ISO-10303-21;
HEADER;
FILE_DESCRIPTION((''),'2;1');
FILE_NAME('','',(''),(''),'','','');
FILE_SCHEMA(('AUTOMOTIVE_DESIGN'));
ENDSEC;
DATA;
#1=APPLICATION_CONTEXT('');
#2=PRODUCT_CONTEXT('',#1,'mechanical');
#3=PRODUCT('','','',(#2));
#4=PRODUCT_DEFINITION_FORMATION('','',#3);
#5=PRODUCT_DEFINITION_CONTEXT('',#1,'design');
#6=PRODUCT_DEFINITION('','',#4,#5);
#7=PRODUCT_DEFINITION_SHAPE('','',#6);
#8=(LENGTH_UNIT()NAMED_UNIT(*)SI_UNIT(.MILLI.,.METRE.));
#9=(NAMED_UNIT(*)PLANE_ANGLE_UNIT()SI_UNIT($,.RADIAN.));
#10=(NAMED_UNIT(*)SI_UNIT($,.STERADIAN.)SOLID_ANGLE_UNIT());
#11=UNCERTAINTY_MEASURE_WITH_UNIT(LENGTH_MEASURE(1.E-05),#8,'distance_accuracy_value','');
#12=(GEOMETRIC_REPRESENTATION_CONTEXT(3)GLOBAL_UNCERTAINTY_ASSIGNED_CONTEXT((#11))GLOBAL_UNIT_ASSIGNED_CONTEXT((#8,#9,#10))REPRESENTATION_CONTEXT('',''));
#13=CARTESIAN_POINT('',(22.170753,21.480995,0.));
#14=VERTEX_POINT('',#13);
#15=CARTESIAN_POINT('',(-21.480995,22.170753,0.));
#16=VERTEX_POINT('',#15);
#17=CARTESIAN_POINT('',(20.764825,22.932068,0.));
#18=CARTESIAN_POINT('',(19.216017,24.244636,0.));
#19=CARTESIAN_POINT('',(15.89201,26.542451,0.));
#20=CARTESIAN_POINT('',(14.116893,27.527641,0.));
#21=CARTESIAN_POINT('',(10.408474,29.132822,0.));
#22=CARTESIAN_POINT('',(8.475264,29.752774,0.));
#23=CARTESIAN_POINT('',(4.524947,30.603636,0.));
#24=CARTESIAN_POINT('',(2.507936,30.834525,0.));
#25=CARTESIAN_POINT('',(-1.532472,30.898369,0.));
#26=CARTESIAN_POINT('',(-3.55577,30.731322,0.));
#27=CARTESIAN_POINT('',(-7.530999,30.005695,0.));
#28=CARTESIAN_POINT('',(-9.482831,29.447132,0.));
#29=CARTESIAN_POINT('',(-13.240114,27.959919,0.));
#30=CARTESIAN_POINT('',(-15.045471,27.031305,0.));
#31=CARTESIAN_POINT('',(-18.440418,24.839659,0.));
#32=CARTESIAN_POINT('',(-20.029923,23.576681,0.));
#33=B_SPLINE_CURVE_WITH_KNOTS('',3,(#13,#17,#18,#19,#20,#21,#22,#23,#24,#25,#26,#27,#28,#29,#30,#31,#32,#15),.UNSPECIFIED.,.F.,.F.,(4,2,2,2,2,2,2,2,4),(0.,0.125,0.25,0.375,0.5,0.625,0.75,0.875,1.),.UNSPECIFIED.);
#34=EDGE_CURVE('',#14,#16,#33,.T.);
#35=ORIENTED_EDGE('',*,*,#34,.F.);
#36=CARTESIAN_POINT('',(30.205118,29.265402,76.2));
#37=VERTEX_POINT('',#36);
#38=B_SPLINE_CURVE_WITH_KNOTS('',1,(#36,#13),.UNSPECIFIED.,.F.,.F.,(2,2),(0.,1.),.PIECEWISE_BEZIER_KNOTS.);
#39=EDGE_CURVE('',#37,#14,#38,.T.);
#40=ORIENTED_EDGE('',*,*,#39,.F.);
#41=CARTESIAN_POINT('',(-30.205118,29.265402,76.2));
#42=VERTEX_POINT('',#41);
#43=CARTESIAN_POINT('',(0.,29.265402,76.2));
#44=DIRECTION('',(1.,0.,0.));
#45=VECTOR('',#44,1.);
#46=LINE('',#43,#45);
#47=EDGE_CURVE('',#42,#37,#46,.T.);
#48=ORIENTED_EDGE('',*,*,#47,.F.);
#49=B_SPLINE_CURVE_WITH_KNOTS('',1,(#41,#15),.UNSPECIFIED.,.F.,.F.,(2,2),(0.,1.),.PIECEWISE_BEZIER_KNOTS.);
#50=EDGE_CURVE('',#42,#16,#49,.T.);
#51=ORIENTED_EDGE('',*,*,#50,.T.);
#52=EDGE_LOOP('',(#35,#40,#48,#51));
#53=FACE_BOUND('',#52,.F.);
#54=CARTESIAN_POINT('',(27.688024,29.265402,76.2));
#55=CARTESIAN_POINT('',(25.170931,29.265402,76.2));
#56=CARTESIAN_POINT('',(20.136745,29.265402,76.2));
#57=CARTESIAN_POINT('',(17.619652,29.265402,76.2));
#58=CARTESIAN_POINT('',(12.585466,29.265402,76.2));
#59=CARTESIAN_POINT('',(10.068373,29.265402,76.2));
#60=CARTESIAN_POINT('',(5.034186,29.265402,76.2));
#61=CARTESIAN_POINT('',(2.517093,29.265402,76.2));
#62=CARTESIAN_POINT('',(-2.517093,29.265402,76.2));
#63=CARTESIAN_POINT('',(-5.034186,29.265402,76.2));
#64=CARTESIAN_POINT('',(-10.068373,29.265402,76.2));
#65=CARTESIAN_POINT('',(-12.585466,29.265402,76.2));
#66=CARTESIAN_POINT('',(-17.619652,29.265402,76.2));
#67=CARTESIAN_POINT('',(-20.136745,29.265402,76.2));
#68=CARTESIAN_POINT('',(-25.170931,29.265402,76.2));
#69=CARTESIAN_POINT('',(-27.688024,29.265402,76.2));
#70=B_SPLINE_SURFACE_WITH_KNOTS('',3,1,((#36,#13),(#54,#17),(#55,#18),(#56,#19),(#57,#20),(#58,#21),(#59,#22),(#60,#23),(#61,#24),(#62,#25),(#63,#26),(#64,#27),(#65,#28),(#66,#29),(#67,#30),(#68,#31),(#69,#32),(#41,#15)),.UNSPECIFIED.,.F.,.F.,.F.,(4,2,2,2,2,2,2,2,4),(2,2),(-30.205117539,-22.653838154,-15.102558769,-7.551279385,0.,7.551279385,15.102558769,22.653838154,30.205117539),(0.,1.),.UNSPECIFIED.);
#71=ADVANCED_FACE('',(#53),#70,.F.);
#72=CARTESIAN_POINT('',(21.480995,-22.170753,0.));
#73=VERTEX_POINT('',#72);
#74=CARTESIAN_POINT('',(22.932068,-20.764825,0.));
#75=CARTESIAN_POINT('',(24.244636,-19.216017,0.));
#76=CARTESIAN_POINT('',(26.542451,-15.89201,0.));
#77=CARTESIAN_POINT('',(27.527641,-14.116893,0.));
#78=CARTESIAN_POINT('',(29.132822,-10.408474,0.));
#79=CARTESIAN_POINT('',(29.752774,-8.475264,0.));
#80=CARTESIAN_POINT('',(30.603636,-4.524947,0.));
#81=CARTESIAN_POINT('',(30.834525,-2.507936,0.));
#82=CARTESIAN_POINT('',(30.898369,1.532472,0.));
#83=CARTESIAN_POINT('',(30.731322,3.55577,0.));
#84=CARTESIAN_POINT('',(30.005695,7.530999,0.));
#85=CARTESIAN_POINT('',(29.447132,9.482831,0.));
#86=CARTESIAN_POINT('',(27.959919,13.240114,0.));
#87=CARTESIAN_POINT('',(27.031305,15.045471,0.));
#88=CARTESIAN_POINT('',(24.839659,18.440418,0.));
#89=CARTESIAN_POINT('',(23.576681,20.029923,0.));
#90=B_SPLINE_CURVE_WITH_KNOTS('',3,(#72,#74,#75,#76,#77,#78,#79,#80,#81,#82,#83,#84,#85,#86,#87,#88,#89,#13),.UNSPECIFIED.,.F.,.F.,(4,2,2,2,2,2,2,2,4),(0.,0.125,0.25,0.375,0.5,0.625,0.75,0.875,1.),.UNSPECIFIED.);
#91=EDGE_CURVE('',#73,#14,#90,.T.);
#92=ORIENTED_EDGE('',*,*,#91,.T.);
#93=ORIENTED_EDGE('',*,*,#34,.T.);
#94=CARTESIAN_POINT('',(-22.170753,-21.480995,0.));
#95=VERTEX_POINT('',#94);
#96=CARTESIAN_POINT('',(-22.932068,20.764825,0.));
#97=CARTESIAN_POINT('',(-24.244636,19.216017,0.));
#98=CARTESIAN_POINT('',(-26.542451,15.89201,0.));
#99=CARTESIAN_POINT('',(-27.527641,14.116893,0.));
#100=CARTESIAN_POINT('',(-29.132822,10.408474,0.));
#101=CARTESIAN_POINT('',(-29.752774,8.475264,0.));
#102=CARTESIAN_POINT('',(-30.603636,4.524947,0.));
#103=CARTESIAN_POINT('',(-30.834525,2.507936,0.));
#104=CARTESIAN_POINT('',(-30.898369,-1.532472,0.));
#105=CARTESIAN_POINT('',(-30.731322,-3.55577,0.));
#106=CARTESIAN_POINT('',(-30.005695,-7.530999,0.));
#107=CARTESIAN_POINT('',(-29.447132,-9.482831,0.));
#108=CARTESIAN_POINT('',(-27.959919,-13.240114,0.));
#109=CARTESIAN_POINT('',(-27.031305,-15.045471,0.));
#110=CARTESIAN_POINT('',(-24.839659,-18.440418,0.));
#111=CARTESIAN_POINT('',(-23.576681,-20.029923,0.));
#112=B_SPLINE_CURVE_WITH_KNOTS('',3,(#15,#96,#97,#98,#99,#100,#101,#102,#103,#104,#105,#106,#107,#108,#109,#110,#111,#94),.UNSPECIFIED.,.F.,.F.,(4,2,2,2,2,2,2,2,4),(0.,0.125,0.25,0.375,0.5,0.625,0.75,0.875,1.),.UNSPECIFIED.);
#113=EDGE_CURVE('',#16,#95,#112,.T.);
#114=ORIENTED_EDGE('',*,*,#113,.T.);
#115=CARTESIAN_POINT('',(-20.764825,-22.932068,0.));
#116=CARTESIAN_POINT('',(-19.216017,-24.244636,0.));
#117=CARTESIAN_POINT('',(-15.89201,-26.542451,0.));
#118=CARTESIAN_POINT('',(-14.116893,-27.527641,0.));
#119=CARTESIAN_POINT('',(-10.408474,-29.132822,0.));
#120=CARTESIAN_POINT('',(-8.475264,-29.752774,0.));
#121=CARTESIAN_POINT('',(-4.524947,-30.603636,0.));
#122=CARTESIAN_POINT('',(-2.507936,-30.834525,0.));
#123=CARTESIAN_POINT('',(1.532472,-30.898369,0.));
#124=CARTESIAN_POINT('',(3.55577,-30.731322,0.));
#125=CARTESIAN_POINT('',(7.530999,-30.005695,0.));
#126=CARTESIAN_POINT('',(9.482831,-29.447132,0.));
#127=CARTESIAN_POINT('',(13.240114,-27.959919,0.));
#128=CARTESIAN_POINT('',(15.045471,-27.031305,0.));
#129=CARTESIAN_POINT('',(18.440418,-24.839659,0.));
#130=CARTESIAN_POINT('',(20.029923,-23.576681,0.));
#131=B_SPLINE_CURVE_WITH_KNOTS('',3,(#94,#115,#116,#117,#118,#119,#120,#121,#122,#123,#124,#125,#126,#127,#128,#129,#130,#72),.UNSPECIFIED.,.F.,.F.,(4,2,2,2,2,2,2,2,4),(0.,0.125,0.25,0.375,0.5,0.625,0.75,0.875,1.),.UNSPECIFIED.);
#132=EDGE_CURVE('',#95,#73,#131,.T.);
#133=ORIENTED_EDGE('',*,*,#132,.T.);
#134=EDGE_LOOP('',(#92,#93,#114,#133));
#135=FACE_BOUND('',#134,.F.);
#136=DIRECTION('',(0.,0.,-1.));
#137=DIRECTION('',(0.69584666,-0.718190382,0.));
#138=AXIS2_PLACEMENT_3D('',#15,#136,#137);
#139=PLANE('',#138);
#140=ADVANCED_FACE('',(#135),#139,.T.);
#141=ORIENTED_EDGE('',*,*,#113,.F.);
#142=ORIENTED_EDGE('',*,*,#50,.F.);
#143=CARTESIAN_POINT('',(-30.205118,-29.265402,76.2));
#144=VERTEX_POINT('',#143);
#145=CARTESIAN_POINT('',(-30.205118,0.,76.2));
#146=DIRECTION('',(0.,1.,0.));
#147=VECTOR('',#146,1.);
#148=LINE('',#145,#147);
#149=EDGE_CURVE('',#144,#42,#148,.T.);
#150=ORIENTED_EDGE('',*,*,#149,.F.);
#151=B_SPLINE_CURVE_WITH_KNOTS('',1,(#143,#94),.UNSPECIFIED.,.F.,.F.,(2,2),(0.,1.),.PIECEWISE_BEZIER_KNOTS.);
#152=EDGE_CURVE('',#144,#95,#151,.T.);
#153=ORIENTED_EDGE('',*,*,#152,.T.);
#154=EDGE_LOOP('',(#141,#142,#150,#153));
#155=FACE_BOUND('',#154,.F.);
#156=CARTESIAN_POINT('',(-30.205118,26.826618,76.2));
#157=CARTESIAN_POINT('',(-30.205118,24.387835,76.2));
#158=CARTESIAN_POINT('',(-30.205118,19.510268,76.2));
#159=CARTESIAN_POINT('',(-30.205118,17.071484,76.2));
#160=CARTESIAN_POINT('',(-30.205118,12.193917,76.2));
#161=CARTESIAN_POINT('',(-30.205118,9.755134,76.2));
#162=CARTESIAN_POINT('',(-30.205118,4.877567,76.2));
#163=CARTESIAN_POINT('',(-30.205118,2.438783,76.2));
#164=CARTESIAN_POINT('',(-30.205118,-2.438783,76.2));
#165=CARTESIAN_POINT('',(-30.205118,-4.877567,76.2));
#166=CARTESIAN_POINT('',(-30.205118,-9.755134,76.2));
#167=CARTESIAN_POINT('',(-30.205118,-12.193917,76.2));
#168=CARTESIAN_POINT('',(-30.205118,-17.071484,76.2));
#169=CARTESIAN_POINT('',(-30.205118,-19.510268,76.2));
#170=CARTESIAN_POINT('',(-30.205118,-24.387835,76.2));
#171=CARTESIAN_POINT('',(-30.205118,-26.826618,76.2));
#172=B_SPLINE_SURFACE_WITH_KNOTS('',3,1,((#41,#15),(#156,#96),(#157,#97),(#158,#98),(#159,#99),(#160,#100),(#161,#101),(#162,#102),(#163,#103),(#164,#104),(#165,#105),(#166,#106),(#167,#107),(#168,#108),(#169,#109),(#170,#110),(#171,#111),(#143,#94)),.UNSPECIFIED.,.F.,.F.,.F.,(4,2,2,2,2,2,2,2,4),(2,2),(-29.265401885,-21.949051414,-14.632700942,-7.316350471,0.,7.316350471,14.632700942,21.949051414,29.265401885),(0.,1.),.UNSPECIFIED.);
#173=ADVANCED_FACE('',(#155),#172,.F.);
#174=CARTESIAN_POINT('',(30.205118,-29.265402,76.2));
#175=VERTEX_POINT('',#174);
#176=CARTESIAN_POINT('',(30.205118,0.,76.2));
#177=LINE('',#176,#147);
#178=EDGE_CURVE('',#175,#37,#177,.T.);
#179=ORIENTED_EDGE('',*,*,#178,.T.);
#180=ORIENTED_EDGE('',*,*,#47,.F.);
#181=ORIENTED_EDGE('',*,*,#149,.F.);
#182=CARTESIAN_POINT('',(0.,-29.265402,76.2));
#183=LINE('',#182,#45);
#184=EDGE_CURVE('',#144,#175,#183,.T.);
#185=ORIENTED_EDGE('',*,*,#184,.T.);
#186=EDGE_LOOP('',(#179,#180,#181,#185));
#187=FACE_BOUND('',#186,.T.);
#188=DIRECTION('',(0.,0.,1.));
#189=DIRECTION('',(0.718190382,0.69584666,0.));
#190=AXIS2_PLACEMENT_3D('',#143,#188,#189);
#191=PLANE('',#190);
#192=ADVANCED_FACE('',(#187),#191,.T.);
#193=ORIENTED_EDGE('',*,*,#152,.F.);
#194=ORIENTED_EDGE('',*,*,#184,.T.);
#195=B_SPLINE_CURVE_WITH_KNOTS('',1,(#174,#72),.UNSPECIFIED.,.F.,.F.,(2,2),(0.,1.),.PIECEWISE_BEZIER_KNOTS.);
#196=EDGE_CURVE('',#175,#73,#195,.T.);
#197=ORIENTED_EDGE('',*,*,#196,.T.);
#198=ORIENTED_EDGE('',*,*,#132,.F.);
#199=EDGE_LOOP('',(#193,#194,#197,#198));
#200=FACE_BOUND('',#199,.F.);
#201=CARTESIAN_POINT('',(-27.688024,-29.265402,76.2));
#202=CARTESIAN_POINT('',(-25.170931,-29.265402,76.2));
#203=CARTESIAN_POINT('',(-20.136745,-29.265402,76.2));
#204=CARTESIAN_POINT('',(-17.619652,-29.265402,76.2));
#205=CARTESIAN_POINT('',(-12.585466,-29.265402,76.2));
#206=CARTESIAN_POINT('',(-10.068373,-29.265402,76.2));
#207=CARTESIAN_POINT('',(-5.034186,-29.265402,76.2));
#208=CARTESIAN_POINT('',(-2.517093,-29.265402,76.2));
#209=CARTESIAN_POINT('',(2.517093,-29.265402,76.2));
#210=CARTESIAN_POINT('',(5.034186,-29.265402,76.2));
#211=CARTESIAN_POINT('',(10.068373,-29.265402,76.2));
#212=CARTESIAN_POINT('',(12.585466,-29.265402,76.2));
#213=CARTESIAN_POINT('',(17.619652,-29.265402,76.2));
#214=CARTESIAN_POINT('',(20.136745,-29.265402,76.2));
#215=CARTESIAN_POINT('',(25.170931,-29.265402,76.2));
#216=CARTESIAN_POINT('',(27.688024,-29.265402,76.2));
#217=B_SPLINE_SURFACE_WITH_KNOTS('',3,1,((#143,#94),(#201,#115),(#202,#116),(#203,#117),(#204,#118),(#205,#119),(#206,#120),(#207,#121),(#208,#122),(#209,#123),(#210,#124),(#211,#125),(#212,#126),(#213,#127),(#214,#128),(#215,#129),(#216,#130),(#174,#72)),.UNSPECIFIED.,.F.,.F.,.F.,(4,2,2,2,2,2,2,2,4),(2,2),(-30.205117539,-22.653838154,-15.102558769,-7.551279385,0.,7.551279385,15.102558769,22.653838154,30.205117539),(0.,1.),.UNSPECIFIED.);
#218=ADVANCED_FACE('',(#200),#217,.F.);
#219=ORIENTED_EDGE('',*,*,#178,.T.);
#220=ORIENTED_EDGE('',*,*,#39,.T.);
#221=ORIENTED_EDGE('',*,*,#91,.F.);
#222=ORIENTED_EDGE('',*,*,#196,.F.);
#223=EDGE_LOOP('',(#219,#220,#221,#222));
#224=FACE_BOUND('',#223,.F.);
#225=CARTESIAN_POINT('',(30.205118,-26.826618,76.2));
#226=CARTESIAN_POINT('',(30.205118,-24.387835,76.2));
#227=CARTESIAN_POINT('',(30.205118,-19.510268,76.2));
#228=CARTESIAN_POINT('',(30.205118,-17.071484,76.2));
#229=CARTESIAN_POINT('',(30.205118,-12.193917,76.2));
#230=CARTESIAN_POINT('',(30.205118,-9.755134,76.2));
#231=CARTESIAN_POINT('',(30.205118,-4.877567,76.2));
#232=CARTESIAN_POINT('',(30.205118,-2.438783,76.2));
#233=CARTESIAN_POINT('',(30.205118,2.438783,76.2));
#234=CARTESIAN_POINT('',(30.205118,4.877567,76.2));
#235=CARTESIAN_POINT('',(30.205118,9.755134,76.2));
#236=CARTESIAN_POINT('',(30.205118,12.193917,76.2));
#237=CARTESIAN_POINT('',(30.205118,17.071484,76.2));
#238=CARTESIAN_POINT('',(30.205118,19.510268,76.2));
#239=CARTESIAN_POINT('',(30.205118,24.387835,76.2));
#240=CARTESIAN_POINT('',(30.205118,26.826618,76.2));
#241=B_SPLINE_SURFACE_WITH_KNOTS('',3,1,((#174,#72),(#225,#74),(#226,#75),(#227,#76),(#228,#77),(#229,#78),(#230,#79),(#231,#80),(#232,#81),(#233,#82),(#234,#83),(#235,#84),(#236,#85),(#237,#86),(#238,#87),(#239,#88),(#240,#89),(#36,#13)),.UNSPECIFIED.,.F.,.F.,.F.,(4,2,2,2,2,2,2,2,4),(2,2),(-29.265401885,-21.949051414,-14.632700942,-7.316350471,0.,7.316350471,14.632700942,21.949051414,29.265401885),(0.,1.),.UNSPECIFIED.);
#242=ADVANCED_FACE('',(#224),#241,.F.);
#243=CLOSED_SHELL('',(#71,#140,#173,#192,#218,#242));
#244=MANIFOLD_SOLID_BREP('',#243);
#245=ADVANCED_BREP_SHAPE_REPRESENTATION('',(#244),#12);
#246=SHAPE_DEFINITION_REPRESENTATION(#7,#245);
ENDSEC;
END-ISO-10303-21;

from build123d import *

# Parameters (mm, degrees)
F2_W = 60.4102350771
F2_H = 58.5308037698


# Not quite as in the source:
# - the arcs of a loft's sections are written as splines that run evenly, so that the points pair up as in the source's solid


with BuildPart() as f3:
    # F2 (on offset) → F3 section 0
    with BuildSketch(Plane.XY.offset(76.2)):
        Rectangle(F2_W, F2_H)
    # F1 (on Top) → F3 section 1
    with BuildSketch(Plane.XY):
        with BuildLine():
            add(Edge.make_bspline(
                [(22.1707526983, 21.4809952975), (20.7648248438, 22.9320676684), (19.2160171333, 24.2446357752), (15.892010091, 26.5424507837), (14.1168929518, 27.5276408675), (10.4084743028, 29.1328224007), (8.4752644909, 29.7527741589), (4.5249466842, 30.6036359906), (2.5079363687, 30.8345250249), (-1.5324720978, 30.8983690121), (-3.5557703417, 30.7313223864), (-7.5309988365, 30.0056950405), (-9.482830792, 29.4471322629), (-13.2401135133, 27.9599190359), (-15.0454713729, 27.0313053607), (-18.440418053, 24.8396590228), (-20.0299229267, 23.5766805529), (-21.4809952975, 22.1707526983)],
                knots=[0, 0, 0, 0, 0.125, 0.125, 0.25, 0.25, 0.375, 0.375, 0.5, 0.5, 0.625, 0.625, 0.75, 0.75, 0.875, 0.875, 1, 1, 1, 1], degree=3))
            add(Edge.make_bspline(
                [(-21.4809952975, 22.1707526983), (-22.9320676684, 20.7648248438), (-24.2446357752, 19.2160171333), (-26.5424507837, 15.892010091), (-27.5276408675, 14.1168929518), (-29.1328224007, 10.4084743028), (-29.7527741589, 8.4752644909), (-30.6036359906, 4.5249466842), (-30.8345250249, 2.5079363687), (-30.8983690121, -1.5324720978), (-30.7313223864, -3.5557703417), (-30.0056950405, -7.5309988365), (-29.4471322629, -9.482830792), (-27.9599190359, -13.2401135133), (-27.0313053607, -15.0454713729), (-24.8396590228, -18.440418053), (-23.5766805529, -20.0299229267), (-22.1707526983, -21.4809952975)],
                knots=[0, 0, 0, 0, 0.125, 0.125, 0.25, 0.25, 0.375, 0.375, 0.5, 0.5, 0.625, 0.625, 0.75, 0.75, 0.875, 0.875, 1, 1, 1, 1], degree=3))
            add(Edge.make_bspline(
                [(-22.1707526983, -21.4809952975), (-20.7648248438, -22.9320676684), (-19.2160171333, -24.2446357752), (-15.892010091, -26.5424507837), (-14.1168929518, -27.5276408675), (-10.4084743028, -29.1328224007), (-8.4752644909, -29.7527741589), (-4.5249466842, -30.6036359906), (-2.5079363687, -30.8345250249), (1.5324720978, -30.8983690121), (3.5557703417, -30.7313223864), (7.5309988365, -30.0056950405), (9.482830792, -29.4471322629), (13.2401135133, -27.9599190359), (15.0454713729, -27.0313053607), (18.440418053, -24.8396590228), (20.0299229267, -23.5766805529), (21.4809952975, -22.1707526983)],
                knots=[0, 0, 0, 0, 0.125, 0.125, 0.25, 0.25, 0.375, 0.375, 0.5, 0.5, 0.625, 0.625, 0.75, 0.75, 0.875, 0.875, 1, 1, 1, 1], degree=3))
            add(Edge.make_bspline(
                [(21.4809952975, -22.1707526983), (22.9320676684, -20.7648248438), (24.2446357752, -19.2160171333), (26.5424507837, -15.892010091), (27.5276408675, -14.1168929518), (29.1328224007, -10.4084743028), (29.7527741589, -8.4752644909), (30.6036359906, -4.5249466842), (30.8345250249, -2.5079363687), (30.8983690121, 1.5324720978), (30.7313223864, 3.5557703417), (30.0056950405, 7.5309988365), (29.4471322629, 9.482830792), (27.9599190359, 13.2401135133), (27.0313053607, 15.0454713729), (24.8396590228, 18.440418053), (23.5766805529, 20.0299229267), (22.1707526983, 21.4809952975)],
                knots=[0, 0, 0, 0, 0.125, 0.125, 0.25, 0.25, 0.375, 0.375, 0.5, 0.5, 0.625, 0.625, 0.75, 0.75, 0.875, 0.875, 1, 1, 1, 1], degree=3))
        make_face()
    loft(ruled=True)


solid = f3.part
